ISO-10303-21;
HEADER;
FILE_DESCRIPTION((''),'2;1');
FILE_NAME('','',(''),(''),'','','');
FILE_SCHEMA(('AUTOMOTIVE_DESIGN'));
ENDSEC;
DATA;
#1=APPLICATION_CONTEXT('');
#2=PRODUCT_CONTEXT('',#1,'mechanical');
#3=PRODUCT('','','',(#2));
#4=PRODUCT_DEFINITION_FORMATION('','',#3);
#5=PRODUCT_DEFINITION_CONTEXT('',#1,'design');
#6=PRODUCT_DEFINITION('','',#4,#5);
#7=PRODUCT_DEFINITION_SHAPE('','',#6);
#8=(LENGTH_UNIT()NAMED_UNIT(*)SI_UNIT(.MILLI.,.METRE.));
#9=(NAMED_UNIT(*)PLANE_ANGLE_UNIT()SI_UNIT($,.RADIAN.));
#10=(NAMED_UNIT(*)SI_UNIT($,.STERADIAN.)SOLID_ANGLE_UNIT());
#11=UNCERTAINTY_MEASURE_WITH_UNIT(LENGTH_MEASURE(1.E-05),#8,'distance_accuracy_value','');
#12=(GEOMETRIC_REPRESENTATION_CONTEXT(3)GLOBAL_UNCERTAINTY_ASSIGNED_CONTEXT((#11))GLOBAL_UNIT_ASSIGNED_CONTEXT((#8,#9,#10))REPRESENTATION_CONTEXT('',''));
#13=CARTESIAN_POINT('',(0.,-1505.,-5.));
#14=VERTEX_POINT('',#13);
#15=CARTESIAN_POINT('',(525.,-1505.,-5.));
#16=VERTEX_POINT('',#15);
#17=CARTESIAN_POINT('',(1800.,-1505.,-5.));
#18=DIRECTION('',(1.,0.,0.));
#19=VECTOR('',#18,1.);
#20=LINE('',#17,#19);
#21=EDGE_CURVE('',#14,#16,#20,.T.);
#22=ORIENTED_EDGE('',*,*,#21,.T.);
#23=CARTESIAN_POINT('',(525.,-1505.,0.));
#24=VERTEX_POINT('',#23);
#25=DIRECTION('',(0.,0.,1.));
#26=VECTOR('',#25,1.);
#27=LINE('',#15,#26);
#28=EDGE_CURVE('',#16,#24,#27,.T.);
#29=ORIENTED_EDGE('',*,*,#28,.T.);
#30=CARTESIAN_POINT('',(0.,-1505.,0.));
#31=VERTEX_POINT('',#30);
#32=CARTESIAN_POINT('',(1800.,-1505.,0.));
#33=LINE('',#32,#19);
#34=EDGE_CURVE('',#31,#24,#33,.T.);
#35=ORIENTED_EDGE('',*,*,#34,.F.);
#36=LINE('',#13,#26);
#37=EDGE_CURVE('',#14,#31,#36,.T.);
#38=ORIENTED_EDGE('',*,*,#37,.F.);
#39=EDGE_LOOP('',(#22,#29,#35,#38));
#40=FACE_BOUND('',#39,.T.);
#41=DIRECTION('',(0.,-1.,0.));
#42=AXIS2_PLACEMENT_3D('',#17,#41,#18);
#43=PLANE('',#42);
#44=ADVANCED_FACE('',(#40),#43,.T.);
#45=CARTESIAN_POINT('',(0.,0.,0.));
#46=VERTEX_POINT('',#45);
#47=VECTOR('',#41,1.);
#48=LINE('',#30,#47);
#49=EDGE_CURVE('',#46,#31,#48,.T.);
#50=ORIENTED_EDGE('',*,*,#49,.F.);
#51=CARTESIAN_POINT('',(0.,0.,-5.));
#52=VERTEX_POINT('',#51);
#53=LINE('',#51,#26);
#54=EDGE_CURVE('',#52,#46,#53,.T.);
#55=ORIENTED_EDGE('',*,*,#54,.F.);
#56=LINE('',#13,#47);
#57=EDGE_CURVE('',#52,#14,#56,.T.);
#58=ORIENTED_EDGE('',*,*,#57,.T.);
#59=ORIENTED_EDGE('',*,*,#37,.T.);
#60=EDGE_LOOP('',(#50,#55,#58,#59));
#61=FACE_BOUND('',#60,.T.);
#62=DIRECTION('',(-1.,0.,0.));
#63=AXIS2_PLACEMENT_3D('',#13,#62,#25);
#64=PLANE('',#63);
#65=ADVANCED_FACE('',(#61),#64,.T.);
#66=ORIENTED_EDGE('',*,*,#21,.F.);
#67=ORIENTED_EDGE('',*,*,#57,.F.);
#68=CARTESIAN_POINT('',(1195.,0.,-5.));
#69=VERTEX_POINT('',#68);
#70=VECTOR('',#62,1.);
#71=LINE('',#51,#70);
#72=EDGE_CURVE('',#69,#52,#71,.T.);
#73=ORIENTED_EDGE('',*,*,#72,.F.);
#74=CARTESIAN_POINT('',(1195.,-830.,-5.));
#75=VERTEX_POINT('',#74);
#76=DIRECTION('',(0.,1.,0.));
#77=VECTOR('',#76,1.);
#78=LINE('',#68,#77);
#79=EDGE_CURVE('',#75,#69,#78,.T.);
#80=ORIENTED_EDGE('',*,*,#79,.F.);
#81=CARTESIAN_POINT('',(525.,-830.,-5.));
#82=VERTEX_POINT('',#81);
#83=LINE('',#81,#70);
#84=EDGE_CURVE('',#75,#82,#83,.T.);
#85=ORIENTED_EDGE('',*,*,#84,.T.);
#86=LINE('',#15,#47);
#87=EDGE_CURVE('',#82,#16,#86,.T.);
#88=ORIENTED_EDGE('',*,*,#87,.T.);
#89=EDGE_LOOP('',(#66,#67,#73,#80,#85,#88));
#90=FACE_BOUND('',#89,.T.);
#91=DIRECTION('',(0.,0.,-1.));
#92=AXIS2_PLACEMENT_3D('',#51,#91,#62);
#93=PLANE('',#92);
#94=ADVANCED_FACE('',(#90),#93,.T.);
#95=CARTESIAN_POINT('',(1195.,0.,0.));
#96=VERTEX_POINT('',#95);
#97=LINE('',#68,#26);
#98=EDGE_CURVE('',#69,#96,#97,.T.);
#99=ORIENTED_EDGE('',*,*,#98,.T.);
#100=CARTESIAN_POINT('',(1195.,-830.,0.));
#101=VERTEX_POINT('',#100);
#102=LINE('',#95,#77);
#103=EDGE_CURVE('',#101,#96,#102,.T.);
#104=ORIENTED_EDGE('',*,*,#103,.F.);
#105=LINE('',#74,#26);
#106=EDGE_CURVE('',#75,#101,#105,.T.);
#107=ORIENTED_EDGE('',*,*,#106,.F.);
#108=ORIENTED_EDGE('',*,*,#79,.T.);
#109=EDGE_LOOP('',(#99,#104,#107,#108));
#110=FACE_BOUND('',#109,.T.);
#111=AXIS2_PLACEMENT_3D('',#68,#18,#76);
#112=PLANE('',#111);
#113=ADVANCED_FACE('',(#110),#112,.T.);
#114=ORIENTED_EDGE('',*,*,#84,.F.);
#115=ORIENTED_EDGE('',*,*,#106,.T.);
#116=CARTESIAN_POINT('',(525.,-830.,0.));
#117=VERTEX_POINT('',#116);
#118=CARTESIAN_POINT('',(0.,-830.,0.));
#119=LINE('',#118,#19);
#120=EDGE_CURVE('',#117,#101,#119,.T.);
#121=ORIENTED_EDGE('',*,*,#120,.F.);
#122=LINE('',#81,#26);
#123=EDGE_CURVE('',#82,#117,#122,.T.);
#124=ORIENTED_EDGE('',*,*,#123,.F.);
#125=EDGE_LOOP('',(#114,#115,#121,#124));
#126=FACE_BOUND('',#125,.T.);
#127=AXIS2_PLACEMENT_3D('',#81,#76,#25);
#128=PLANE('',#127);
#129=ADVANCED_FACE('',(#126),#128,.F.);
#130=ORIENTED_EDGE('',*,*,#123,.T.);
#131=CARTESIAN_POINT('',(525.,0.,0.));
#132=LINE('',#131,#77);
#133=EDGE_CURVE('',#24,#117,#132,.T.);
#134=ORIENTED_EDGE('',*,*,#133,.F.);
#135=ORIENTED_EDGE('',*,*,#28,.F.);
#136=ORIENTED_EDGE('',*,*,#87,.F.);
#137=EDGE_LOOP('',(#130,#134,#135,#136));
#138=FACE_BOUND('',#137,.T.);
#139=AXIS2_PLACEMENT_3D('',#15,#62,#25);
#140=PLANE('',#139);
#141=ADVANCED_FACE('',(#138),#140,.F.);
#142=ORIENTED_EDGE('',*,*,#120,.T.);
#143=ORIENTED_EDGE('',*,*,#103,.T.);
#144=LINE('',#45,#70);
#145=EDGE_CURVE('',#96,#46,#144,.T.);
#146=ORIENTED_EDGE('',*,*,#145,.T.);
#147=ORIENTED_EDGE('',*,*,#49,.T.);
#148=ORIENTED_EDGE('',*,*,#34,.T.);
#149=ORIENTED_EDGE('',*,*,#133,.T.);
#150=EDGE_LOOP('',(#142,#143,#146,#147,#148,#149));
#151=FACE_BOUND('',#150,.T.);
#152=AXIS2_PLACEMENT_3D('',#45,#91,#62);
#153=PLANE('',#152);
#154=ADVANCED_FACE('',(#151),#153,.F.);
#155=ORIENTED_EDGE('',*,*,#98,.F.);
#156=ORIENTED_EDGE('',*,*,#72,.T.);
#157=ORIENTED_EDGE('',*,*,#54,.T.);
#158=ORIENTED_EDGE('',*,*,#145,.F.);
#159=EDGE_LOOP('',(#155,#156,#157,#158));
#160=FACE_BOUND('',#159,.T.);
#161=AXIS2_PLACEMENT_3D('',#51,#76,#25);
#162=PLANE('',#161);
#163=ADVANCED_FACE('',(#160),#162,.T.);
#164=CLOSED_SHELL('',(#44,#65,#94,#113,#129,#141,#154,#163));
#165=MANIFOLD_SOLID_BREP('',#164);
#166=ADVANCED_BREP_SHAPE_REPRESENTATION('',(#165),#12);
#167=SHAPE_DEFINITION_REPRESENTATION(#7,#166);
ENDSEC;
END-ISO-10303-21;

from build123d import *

# Parameters (mm, degrees)
TABAN_FLAN_1_DEPTH         = 5
KES_EKSTR_ZYON1_DEPTH      = 2347.284296499
KES_EKSTR_ZYON1_DEPTH_BACK = 2347.284296499


# Sheet-metal steps are written as plain solids
with BuildPart() as part:
    # Çizim1 → Taban-Flanş1 (new body)
    with BuildSketch(Plane.XY):
        Polygon((0, 0), (1195, 0), (1195, -895), (1800, -895), (1800, -1505), (0, -1505), align=None)
    extrude(amount=-TABAN_FLAN_1_DEPTH)

    # Çizim2 → Kes-Ekstrüzyon1 (cut, two sides: drawn at the far end of the back side and taken through both)
    with BuildSketch(Plane.XY.offset(-KES_EKSTR_ZYON1_DEPTH_BACK)):
        Polygon((525, -1505), (525, -830), (1195, -830), (1965.528313332, -849.744695172), (1943.261334952, -1718.704035599), align=None)
    extrude(amount=KES_EKSTR_ZYON1_DEPTH + KES_EKSTR_ZYON1_DEPTH_BACK, mode=Mode.SUBTRACT)


solid = part.part
